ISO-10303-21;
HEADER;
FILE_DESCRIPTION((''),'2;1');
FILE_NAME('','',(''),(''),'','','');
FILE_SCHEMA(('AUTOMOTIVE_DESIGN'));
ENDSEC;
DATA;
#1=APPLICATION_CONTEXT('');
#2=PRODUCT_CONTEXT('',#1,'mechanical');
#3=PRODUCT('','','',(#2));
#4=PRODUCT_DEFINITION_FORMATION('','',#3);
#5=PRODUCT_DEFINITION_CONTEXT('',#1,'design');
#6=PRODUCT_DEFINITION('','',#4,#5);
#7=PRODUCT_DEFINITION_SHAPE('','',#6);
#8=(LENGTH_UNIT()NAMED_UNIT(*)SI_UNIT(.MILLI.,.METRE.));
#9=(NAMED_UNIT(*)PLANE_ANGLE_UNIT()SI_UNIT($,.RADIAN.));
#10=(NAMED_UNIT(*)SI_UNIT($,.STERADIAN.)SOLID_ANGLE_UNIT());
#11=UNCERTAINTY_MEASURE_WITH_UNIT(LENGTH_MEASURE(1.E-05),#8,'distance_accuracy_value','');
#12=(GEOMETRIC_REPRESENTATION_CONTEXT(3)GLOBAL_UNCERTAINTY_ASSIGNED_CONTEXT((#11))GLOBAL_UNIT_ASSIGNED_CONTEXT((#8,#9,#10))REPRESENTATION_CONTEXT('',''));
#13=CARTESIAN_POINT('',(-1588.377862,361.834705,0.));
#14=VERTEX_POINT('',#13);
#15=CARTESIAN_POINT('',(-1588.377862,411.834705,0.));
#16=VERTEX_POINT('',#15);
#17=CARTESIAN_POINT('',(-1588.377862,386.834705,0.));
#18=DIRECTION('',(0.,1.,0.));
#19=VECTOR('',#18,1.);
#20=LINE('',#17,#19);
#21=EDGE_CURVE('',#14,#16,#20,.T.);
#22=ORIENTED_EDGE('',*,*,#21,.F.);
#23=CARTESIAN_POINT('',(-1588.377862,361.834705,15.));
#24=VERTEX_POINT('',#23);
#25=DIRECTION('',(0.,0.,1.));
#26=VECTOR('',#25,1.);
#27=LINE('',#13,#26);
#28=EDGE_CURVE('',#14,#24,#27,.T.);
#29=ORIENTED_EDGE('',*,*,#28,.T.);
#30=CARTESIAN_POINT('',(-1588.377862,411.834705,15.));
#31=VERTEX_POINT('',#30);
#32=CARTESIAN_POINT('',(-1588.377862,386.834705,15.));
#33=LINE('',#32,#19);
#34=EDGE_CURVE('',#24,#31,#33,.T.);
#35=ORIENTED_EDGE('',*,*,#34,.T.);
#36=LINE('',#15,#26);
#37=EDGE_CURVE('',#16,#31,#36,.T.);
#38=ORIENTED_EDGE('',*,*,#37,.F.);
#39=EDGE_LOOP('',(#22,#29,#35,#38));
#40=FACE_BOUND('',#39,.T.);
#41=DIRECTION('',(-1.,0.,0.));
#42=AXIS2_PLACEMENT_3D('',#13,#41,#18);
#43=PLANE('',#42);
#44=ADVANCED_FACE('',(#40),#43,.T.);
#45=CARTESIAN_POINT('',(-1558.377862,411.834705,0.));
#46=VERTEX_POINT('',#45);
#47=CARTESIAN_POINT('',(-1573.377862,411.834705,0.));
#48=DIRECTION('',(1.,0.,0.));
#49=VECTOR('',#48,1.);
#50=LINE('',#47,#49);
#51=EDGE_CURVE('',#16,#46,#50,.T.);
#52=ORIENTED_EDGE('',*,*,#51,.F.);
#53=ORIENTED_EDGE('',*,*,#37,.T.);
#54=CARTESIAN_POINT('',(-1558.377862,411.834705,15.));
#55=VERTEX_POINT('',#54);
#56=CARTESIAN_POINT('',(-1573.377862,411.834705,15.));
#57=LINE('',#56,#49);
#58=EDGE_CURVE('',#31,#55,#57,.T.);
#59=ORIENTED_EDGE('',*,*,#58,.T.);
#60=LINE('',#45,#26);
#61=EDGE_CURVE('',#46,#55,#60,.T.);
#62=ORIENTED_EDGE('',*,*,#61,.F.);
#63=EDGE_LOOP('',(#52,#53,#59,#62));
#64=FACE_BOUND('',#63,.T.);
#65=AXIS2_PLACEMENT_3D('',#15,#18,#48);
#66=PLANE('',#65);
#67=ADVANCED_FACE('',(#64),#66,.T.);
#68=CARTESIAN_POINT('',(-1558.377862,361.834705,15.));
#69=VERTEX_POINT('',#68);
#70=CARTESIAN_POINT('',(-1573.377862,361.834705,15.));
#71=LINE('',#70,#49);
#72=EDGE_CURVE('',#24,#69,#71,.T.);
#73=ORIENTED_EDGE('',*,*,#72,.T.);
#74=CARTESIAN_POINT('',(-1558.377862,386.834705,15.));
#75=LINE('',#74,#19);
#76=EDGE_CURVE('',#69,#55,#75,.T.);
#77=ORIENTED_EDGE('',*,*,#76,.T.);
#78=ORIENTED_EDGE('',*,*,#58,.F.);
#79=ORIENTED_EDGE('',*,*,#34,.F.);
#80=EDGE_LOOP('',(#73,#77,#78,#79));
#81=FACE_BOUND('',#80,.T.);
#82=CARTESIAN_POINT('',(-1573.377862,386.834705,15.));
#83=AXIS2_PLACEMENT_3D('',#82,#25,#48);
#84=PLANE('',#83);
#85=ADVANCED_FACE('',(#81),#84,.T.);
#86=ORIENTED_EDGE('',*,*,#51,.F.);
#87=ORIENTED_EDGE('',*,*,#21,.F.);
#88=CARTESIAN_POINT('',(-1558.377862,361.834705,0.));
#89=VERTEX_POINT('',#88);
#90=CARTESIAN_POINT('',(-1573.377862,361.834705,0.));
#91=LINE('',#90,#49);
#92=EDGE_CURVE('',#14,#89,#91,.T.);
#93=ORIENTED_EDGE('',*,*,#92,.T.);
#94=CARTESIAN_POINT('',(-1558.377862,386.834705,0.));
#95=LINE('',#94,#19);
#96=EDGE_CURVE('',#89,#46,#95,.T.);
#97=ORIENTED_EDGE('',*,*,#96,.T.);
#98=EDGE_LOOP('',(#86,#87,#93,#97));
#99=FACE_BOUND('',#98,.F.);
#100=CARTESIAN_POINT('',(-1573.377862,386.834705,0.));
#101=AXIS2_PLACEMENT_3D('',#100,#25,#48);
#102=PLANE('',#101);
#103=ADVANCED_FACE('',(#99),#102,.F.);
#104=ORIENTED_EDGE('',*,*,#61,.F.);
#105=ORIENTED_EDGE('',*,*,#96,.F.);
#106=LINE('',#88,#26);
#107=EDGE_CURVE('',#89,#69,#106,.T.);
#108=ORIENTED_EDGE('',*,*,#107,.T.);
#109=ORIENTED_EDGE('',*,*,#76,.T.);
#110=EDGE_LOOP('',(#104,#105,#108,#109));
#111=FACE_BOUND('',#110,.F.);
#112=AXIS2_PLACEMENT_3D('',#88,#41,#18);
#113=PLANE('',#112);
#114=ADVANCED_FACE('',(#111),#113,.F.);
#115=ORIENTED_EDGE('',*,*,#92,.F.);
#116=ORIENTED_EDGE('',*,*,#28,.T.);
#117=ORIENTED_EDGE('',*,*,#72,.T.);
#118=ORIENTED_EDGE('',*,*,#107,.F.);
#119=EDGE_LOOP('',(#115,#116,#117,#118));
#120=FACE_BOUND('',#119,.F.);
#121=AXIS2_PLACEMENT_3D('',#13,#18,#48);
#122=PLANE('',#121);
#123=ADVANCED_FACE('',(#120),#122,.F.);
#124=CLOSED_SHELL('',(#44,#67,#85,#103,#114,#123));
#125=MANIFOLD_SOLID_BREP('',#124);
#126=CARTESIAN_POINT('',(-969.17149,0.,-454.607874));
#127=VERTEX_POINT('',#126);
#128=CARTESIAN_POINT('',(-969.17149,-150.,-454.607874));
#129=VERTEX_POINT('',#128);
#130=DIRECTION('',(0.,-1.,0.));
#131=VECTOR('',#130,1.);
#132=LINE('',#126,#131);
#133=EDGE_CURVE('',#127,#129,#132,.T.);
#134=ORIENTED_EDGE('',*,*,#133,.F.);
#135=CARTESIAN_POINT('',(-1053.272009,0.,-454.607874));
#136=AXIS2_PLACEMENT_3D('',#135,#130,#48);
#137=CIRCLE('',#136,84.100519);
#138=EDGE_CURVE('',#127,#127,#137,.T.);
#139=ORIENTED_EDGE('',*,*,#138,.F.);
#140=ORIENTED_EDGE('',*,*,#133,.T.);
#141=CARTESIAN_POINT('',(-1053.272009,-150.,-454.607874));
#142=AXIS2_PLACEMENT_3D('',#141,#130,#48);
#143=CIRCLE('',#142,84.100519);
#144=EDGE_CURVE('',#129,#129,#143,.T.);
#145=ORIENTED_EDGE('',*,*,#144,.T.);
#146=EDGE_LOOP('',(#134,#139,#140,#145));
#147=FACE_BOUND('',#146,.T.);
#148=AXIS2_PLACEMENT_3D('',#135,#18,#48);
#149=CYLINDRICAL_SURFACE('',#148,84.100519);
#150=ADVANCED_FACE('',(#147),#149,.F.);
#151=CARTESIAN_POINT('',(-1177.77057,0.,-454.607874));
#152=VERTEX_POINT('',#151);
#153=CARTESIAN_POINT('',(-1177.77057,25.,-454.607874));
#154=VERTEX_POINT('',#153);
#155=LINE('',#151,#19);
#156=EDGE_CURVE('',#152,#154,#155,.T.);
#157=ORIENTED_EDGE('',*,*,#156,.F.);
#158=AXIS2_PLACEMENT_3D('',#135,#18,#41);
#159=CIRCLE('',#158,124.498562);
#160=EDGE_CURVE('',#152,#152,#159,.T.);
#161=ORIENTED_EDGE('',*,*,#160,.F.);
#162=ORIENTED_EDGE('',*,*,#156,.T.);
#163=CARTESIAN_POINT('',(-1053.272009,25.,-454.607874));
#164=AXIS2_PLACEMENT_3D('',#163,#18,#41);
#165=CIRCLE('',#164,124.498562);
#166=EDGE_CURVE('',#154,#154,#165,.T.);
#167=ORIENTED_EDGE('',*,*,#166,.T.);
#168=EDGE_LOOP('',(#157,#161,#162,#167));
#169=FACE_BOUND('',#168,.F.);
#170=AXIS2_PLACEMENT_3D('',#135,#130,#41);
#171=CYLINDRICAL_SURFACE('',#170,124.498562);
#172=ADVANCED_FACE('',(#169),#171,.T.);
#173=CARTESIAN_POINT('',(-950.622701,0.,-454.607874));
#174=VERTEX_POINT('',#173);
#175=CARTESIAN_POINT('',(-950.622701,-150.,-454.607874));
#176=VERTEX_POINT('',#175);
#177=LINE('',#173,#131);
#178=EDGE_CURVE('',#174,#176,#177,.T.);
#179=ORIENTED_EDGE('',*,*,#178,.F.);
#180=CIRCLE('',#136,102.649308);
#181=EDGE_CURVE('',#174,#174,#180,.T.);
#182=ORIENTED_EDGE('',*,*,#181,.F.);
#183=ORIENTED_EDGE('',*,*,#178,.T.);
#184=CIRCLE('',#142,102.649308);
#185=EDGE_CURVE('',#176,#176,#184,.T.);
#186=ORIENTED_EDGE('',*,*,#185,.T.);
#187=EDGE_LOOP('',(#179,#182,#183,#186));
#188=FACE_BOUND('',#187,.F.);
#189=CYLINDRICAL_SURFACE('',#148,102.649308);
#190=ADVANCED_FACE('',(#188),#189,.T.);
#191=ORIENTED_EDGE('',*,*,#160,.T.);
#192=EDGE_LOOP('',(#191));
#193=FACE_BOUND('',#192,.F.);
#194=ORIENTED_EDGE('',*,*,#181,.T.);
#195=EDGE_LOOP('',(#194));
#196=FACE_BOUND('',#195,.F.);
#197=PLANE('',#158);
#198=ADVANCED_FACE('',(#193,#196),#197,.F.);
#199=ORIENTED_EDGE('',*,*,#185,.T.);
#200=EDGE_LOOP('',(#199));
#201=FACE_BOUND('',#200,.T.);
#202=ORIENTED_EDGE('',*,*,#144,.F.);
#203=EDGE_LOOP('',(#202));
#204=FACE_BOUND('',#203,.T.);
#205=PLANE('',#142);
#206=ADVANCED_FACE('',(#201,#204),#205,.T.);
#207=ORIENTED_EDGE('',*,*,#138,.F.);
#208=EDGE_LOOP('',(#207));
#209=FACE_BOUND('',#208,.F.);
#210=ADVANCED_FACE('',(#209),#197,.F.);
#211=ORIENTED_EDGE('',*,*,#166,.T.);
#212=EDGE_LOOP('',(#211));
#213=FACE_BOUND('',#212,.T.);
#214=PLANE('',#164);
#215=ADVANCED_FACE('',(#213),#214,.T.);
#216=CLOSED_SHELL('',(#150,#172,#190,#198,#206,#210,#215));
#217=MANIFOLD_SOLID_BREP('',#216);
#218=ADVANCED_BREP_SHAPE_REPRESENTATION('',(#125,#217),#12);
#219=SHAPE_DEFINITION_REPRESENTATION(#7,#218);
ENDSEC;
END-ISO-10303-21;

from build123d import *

# Parameters (mm, degrees)
F0_W     = 30
F0_H     = 50
F1_DEPTH = 15
F2_R     = 102.6493082789
F2_R_2   = 84.1005190764
F3_DEPTH = 150
F4_R     = 124.4985615198
F4_R_2   = 102.6493082789
F4_R_3   = 84.1005190764
F5_DEPTH = 25


with BuildPart() as f1:
    # F0 (on Top) → F1 (new body)
    with BuildSketch(Plane.XY):
        with Locations((-1573.3778619766, 386.8347048759)):
            Rectangle(F0_W, F0_H)
    extrude(amount=F1_DEPTH)


with BuildPart() as f3:
    # F2 (on Front) → F3 (new body)
    with BuildSketch(Plane.XZ):
        with Locations((-1053.2720088959, -454.607874155)):
            Circle(F2_R)
        with Locations((-1053.2720088959, -454.607874155)):
            Circle(F2_R_2, mode=Mode.SUBTRACT)
    extrude(amount=F3_DEPTH)

    # F4 (on face) → F5 (join)
    with BuildSketch(Plane(origin=(0, 0, 0), x_dir=(-1, 0, 0), z_dir=(0, 1, 0))):
        with Locations((1053.2720088959, -454.607874155)):
            Circle(F4_R)
        with Locations((1053.2720088959, -454.607874155)):
            Circle(F4_R_2, mode=Mode.SUBTRACT)
        with Locations((1053.2720088959, -454.607874155)):
            Circle(F4_R_2)
        with Locations((1053.2720088959, -454.607874155)):
            Circle(F4_R_3, mode=Mode.SUBTRACT)
        with Locations((1053.2720088959, -454.607874155)):
            Circle(F4_R_3)
    extrude(amount=F5_DEPTH)


solid = Compound([f1.part, f3.part])
